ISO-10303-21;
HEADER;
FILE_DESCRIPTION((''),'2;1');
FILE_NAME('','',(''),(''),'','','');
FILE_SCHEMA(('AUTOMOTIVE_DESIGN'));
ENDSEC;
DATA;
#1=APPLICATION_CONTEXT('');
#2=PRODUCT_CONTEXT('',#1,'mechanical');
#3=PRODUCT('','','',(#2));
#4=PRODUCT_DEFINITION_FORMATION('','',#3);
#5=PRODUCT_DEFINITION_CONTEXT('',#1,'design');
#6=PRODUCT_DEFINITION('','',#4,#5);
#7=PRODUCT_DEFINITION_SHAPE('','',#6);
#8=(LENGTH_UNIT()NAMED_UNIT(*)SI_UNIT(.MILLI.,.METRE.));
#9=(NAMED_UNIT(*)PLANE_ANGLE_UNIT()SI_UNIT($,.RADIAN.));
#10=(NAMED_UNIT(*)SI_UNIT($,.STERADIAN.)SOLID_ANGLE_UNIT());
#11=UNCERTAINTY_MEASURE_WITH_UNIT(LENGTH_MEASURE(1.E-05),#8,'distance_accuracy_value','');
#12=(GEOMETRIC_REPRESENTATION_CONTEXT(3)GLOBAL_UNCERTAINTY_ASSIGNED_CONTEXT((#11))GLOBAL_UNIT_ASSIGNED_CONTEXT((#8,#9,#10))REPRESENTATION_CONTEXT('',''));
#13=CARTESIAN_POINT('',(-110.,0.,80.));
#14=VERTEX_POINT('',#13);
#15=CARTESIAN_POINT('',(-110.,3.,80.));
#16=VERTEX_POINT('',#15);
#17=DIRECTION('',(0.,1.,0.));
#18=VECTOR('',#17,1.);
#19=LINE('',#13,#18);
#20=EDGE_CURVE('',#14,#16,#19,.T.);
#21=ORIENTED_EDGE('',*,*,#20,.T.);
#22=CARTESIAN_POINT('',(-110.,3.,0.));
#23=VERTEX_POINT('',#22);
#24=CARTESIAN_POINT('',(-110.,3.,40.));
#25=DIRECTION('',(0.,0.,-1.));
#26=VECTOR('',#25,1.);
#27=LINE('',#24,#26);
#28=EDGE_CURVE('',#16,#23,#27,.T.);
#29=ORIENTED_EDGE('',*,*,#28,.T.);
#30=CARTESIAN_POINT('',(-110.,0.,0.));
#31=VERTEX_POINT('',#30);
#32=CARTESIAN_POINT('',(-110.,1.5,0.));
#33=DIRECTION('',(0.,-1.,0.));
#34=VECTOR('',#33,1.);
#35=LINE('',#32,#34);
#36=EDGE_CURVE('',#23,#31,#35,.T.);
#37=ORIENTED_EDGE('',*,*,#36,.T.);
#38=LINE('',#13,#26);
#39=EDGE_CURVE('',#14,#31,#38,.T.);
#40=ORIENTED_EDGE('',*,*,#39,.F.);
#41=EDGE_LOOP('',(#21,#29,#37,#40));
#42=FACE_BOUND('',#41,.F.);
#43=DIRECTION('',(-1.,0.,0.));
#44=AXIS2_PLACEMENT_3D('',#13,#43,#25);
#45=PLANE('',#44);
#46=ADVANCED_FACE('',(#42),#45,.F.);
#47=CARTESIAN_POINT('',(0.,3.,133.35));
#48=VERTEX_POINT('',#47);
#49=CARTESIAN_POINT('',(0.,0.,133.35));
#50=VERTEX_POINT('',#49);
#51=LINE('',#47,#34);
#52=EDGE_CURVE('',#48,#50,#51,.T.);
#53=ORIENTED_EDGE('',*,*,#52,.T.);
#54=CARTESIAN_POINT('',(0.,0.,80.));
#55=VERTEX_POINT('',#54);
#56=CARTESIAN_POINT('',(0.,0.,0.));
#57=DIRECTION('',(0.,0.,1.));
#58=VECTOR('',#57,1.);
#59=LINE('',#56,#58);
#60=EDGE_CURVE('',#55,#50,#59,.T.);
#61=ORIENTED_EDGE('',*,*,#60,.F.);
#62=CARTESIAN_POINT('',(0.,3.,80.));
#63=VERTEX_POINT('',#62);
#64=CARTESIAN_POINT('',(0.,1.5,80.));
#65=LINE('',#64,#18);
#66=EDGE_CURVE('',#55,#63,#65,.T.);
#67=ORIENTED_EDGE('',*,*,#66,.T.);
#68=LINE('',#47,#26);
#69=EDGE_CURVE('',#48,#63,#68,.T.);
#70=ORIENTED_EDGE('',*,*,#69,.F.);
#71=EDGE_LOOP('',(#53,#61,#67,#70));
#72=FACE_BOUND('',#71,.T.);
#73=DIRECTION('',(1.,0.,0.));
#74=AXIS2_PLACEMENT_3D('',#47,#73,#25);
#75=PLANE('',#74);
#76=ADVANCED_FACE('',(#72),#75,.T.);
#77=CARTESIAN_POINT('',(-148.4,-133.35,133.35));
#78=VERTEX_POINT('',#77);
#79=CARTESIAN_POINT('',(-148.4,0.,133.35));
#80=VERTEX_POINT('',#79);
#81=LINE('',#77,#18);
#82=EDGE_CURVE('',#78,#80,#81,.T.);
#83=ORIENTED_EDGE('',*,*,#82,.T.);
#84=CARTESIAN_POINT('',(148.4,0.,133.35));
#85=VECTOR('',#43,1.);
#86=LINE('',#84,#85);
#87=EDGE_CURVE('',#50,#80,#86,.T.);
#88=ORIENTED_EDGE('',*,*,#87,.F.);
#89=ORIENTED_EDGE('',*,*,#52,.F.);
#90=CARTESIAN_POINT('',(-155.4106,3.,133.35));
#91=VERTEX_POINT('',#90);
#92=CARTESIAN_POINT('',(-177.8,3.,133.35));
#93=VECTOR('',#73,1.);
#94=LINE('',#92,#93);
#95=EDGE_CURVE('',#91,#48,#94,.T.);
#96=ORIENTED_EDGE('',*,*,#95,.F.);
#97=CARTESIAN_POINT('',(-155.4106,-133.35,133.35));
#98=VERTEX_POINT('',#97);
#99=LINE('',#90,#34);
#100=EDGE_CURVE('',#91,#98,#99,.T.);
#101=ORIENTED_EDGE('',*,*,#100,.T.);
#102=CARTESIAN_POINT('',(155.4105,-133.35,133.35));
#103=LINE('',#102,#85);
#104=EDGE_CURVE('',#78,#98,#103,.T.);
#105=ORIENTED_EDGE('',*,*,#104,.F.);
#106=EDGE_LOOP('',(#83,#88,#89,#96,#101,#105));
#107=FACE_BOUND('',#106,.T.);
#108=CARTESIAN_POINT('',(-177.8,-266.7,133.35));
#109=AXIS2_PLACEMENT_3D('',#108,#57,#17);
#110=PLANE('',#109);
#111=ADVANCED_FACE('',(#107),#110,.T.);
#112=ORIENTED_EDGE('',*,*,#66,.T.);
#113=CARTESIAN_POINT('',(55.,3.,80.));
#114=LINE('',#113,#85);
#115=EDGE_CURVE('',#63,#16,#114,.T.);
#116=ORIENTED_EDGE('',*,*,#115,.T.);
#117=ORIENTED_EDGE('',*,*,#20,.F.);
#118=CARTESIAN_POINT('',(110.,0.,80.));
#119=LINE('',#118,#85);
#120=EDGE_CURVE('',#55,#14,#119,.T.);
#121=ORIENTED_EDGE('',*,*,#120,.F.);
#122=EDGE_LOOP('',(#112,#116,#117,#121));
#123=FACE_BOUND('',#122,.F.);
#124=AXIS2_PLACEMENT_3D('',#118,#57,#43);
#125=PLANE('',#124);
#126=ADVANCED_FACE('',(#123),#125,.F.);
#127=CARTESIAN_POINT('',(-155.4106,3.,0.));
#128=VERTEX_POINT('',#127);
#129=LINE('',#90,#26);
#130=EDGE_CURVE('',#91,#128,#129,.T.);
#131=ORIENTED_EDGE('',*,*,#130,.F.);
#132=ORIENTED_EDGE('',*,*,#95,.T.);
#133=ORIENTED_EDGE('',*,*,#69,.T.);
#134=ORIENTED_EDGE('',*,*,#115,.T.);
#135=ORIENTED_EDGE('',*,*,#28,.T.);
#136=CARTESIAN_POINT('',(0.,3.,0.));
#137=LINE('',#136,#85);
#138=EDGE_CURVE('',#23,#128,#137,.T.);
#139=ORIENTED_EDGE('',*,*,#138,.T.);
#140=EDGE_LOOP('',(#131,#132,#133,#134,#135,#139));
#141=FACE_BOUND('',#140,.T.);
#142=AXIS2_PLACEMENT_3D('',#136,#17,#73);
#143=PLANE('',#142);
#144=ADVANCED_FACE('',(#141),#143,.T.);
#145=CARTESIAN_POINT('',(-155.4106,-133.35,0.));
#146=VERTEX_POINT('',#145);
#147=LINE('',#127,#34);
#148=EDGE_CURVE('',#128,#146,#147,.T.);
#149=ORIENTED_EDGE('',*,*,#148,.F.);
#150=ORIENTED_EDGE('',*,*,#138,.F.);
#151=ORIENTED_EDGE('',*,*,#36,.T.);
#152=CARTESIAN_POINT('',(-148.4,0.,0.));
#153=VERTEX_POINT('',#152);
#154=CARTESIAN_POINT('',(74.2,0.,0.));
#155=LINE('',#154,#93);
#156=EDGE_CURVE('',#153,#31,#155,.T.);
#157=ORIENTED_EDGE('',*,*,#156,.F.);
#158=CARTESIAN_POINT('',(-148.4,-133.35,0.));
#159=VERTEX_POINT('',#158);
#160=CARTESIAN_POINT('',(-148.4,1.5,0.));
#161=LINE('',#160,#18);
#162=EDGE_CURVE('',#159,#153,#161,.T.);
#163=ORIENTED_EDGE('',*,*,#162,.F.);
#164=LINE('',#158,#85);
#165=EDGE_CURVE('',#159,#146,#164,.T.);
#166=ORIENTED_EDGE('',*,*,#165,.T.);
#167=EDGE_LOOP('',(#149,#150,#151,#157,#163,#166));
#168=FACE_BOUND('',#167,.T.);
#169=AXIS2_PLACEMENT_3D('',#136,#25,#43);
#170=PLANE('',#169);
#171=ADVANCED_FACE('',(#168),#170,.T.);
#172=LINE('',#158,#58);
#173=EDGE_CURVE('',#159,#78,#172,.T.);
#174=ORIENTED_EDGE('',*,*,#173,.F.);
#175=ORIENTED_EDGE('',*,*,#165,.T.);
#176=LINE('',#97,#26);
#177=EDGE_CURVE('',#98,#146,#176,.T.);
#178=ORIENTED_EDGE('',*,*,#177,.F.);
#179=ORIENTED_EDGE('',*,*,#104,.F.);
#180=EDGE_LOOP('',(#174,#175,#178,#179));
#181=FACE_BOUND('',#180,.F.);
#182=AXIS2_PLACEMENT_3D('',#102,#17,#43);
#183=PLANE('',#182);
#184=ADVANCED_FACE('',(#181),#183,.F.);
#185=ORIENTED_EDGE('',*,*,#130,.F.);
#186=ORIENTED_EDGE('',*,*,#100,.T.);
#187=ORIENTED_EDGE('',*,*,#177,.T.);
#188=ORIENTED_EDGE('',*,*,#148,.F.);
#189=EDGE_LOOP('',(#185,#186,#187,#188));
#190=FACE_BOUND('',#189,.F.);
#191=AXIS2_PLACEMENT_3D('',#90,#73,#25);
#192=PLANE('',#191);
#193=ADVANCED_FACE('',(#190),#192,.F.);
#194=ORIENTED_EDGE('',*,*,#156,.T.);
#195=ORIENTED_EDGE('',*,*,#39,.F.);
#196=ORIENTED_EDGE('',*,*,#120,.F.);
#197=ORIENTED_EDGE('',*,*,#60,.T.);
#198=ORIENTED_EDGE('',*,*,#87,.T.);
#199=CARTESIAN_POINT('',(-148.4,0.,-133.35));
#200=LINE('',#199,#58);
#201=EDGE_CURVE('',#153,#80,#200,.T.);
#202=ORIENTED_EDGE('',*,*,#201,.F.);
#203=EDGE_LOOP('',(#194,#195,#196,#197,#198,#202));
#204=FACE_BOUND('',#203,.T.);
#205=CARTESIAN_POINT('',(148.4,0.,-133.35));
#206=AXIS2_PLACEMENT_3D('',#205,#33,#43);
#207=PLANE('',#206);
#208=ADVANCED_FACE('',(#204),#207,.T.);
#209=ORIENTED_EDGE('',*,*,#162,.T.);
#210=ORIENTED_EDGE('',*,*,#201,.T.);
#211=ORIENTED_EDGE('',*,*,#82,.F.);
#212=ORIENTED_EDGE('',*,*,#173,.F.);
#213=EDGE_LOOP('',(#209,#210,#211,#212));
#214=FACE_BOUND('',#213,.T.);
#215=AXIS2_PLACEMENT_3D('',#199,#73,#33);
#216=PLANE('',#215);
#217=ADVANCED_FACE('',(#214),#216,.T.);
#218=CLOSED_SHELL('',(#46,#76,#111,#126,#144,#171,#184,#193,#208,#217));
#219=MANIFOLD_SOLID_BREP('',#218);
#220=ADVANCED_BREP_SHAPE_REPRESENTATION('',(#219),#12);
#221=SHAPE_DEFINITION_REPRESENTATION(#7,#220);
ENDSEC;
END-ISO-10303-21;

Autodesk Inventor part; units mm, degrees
ref_plane "YZ Plane" through (0, 0, 0) normal (1, 0, 0) x (0, 1, 0)
ref_plane "XZ Plane" through (0, 0, 0) normal (0, 1, 0) x (-1, 0, 0)
ref_plane "XY Plane" through (0, 0, 0) normal (0, 0, 1) x (1, 0, 0)
sketch "Sketch1" plane through (0, 0, 0) normal (0, 1, 0) x (-1, 0, 0)
  line L0 (110, -80) -> (-110, -80)
  line L1 (-110, -80) -> (-110, 80)
  line L2 (-110, 80) -> (110, 80)
  line L3 (110, 80) -> (110, -80)
  line L4 (320.2117, -53.5522) -> (168.036, -53.5522) construction
  line L5 (168.036, -53.5522) -> (168.036, 90.1689) construction
  line L6 (168.036, 90.1689) -> (320.2117, 90.1689) construction
  line L7 (320.2117, 90.1689) -> (320.2117, -53.5522) construction
  line L8 (124.3, -89.75) -> (-124.3, -89.75) construction
  line L9 (-124.3, -89.75) -> (-124.3, 89.75) construction
  line L10 (-124.3, 89.75) -> (124.3, 89.75) construction
  line L11 (124.3, 89.75) -> (124.3, -89.75) construction
  line L12 (124.3, -89.75) -> (-124.3, 89.75) construction
  line L13 (-124.3, -89.75) -> (124.3, 89.75) construction
  line L14 (-152.4, -107.95) -> (152.4, -107.95)
  line L15 (152.4, -107.95) -> (152.4, 107.95)
  line L16 (152.4, 107.95) -> (-152.4, 107.95)
  line L17 (-152.4, 107.95) -> (-152.4, -107.95)
  line L18 (-152.4, -107.95) -> (152.4, 107.95) construction
  line L19 (152.4, -107.95) -> (-152.4, 107.95) construction
  line L20 (177.8, 133.35) -> (177.8, -133.35)
  line L21 (177.8, -133.35) -> (-177.8, -133.35)
  line L22 (-177.8, -133.35) -> (-177.8, 133.35)
  line L23 (-177.8, 133.35) -> (177.8, 133.35)
  point P0 (0, 0)
  dimension "d11" = 220
  dimension "d12" = 160
  dimension "d15" = 248.6
  dimension "d16" = 179.5
  dimension "d18" = 304.8
  dimension "d19" = 215.9
  dimension "d22" = 25.4
extrude "Top" add sketch "Sketch1" along normal blind 25.4 contours L17 L16 L15 L14 | L20 L21 L22 L23
sketch "Sketch3" plane through (177.8, 0, 133.35) normal (1, 0, 0) x (0, 0, -1)
  line L0 (0, 0) -> (0, 25.4) projected
  line L1 (266.7, 0) -> (266.7, 25.4) projected
  line L2 (0, 0) -> (266.7, 0)
  line L3 (266.7, 0) -> (266.7, -266.7)
  line L4 (266.7, -266.7) -> (0, -266.7)
  line L5 (0, -266.7) -> (0, 0)
  point P0 (133.35, 0)
  dimension "d25" = 266.7
extrude "Right" add sketch "Sketch3" against normal blind 50.8
sketch "Sketch4" plane through (-177.8, 0, -133.35) normal (-1, 0, 0) x (0, 0, 1)
  line L0 (0, 0) -> (0, 25.4) projected
  line L1 (266.7, -266.7) -> (266.7, 0) projected
  line L2 (0, 0) -> (266.7, 0)
  line L3 (266.7, 0) -> (266.7, -266.7)
  line L4 (266.7, -266.7) -> (0, -266.7)
  line L5 (0, -266.7) -> (0, 0)
  point P0 (133.35, 0)
  dimension "d28" = 266.7
extrude "Left" add sketch "Sketch4" against normal blind 50.8
sketch "Sketch5" plane through (0, 0, 0) normal (1, 0, 0) x (0, 1, 0)
  line L0 (-266.7, -133.35) -> (25.4, -133.35) projected
  line L1 (-266.7, 133.35) -> (-266.7, -133.35) projected
  line L2 (0, -133.35) -> (-266.7, 133.35)
  line L3 (-266.7, 133.35) -> (-275.6803, 124.3697)
  line L4 (-275.6803, 124.3697) -> (-8.9803, -142.3303)
  line L5 (-8.9803, -142.3303) -> (0, -133.35)
  point P0 (0, 0)
  dimension "d31" = 12.7
extrude "Plexiglass Cut" cut sketch "Sketch5" along normal mid plane 304.8 contours L4 L1 L2 L0 | L0 L5 L4 | L4 L3 L1
sketch "Sketch6" plane through (-177.8, -266.7, -133.35) normal (0, -1, 0) x (1, 0, 0)
  line L0 (0, 0) -> (0, 266.7) projected
  line L1 (355.6, 0) -> (0, 0) projected
  line L2 (0, 266.7) -> (355.6, 266.7)
  line L3 (355.6, 266.7) -> (355.6, 0)
  line L4 (355.6, 0) -> (0, 0)
  line L5 (0, 0) -> (0, 266.7)
  point P0 (177.8, 133.35)
extrude "Bottom" add sketch "Sketch6" along normal blind 25.4
sketch "Sketch9" plane through (0, 25.4, 0) normal (0, 1, 0) x (1, 0, 0)
  line L0 (177.8, -133.35) -> (127, -133.35) projected
  line L1 (177.8, 133.35) -> (-177.8, 133.35) projected
  line L2 (177.8, -133.35) -> (-177.8, -133.35)
  line L3 (-177.8, -133.35) -> (-177.8, 133.35)
  line L4 (-177.8, 133.35) -> (177.8, 133.35)
  line L5 (177.8, 133.35) -> (177.8, -133.35)
  point P0 (0, 0)
extrude "Top Flattening" cut sketch "Sketch9" against normal blind 22.4
sketch "Sketch10" plane through (0, 3, 0) normal (0, 1, 0) x (1, 0, 0)
  line L0 (-177.8, -133.35) -> (-177.8, 133.35) projected
  line L1 (-155.4106, 133.35) -> (-177.8, 133.35)
  line L2 (-177.8, 133.35) -> (-177.8, -133.35)
  line L3 (-177.8, -133.35) -> (-155.4106, -133.35)
  line L4 (-155.4106, -133.35) -> (-155.4106, 133.35)
  line L5 (177.8, 133.35) -> (177.8, -133.35)
  line L6 (177.8, -133.35) -> (155.4106, -133.35)
  line L7 (155.4106, -133.35) -> (155.4106, 133.35)
  line L8 (155.4106, 133.35) -> (177.8, 133.35)
  line L9 (152.4, -115.3895) -> (152.4, 133.35) projected
  point P0 (0, 0)
  point P1 (-177.8, 0)
  dimension "d48" = 22.3894
  dimension "d49" = 22.3894
extrude "Outer Side Flattening" cut sketch "Sketch10" against normal through all
sketch "Sketch11" plane through (-177.8, -292.1, -133.35) normal (0, -1, 0) x (1, 0, 0)
  line L0 (22.3894, 0) -> (333.2106, 0) projected
  line L1 (333.2106, 0) -> (22.3894, 0)
  line L2 (22.3894, 0) -> (22.3894, 266.7)
  line L3 (22.3894, 266.7) -> (333.2106, 266.7)
  line L4 (333.2106, 266.7) -> (333.2106, 0)
  point P0 (177.8, 133.35)
extrude "Bottom Flattening" cut sketch "Sketch11" against normal blind 22.4
sketch "Sketch12" plane through (155.4106, 3, -133.35) normal (0, 0, -1) x (-1, 0, 0)
  line L0 (155.4106, -3) -> (155.4106, -269.7) construction
  line L1 (7.0106, -269.7) -> (7.0106, -3)
  line L2 (7.0106, -3) -> (303.8106, -3)
  line L3 (303.8106, -3) -> (303.8106, -269.7)
  line L4 (303.8106, -269.7) -> (7.0106, -269.7)
  line L5 (7.0106, -269.7) -> (303.8106, -3) construction
  line L6 (7.0106, -3) -> (303.8106, -269.7) construction
  point P0 (155.4106, -136.35)
  point P1 (155.4106, -3)
  dimension "d54" = 296.8
extrude "Inner Flattening" cut sketch "Sketch12" against normal through all
sketch "Sketch13" plane through (-155.4106, 3, 133.35) normal (0, 0, 1) x (1, 0, 0)
  line L0 (310.8211, -272.7) -> (310.8211, 0) projected
  line L1 (0, -272.7) -> (310.8211, -272.7) projected
  line L2 (310.8211, -136.35) -> (0, -136.35)
  line L3 (0, -136.35) -> (0, -272.7)
  line L4 (0, -272.7) -> (310.8211, -272.7)
  line L5 (310.8211, -272.7) -> (310.8211, -136.35)
  point P0 (155.4106, -3)
extrude "Bottom Cut" cut sketch "Sketch13" against normal through all
sketch "Sketch14" plane through (0, 3, 0) normal (0, 1, 0) x (1, 0, 0)
  line L0 (-155.4106, -133.35) -> (-148.4, -133.35) projected
  line L1 (0, 0) -> (-155.4106, 0)
  line L2 (-155.4106, 0) -> (-155.4106, -133.35)
  line L3 (-155.4106, -133.35) -> (0, -133.35)
  line L4 (0, -133.35) -> (0, 0)
  line L5 (-155.4106, 133.35) -> (155.4106, 133.35) projected
  line L6 (-155.4106, -133.35) -> (155.4106, -133.35)
  line L7 (155.4106, -133.35) -> (155.4106, 133.35)
  line L8 (155.4106, 133.35) -> (-155.4106, 133.35)
  line L9 (-155.4106, 133.35) -> (-155.4106, -133.35)
extrude "Quarter Cut" cut sketch "Sketch14" against normal through all contours L9 L5 L7 L6 L4 L1
properties part number "Apple iPad 2022 Hologram"
